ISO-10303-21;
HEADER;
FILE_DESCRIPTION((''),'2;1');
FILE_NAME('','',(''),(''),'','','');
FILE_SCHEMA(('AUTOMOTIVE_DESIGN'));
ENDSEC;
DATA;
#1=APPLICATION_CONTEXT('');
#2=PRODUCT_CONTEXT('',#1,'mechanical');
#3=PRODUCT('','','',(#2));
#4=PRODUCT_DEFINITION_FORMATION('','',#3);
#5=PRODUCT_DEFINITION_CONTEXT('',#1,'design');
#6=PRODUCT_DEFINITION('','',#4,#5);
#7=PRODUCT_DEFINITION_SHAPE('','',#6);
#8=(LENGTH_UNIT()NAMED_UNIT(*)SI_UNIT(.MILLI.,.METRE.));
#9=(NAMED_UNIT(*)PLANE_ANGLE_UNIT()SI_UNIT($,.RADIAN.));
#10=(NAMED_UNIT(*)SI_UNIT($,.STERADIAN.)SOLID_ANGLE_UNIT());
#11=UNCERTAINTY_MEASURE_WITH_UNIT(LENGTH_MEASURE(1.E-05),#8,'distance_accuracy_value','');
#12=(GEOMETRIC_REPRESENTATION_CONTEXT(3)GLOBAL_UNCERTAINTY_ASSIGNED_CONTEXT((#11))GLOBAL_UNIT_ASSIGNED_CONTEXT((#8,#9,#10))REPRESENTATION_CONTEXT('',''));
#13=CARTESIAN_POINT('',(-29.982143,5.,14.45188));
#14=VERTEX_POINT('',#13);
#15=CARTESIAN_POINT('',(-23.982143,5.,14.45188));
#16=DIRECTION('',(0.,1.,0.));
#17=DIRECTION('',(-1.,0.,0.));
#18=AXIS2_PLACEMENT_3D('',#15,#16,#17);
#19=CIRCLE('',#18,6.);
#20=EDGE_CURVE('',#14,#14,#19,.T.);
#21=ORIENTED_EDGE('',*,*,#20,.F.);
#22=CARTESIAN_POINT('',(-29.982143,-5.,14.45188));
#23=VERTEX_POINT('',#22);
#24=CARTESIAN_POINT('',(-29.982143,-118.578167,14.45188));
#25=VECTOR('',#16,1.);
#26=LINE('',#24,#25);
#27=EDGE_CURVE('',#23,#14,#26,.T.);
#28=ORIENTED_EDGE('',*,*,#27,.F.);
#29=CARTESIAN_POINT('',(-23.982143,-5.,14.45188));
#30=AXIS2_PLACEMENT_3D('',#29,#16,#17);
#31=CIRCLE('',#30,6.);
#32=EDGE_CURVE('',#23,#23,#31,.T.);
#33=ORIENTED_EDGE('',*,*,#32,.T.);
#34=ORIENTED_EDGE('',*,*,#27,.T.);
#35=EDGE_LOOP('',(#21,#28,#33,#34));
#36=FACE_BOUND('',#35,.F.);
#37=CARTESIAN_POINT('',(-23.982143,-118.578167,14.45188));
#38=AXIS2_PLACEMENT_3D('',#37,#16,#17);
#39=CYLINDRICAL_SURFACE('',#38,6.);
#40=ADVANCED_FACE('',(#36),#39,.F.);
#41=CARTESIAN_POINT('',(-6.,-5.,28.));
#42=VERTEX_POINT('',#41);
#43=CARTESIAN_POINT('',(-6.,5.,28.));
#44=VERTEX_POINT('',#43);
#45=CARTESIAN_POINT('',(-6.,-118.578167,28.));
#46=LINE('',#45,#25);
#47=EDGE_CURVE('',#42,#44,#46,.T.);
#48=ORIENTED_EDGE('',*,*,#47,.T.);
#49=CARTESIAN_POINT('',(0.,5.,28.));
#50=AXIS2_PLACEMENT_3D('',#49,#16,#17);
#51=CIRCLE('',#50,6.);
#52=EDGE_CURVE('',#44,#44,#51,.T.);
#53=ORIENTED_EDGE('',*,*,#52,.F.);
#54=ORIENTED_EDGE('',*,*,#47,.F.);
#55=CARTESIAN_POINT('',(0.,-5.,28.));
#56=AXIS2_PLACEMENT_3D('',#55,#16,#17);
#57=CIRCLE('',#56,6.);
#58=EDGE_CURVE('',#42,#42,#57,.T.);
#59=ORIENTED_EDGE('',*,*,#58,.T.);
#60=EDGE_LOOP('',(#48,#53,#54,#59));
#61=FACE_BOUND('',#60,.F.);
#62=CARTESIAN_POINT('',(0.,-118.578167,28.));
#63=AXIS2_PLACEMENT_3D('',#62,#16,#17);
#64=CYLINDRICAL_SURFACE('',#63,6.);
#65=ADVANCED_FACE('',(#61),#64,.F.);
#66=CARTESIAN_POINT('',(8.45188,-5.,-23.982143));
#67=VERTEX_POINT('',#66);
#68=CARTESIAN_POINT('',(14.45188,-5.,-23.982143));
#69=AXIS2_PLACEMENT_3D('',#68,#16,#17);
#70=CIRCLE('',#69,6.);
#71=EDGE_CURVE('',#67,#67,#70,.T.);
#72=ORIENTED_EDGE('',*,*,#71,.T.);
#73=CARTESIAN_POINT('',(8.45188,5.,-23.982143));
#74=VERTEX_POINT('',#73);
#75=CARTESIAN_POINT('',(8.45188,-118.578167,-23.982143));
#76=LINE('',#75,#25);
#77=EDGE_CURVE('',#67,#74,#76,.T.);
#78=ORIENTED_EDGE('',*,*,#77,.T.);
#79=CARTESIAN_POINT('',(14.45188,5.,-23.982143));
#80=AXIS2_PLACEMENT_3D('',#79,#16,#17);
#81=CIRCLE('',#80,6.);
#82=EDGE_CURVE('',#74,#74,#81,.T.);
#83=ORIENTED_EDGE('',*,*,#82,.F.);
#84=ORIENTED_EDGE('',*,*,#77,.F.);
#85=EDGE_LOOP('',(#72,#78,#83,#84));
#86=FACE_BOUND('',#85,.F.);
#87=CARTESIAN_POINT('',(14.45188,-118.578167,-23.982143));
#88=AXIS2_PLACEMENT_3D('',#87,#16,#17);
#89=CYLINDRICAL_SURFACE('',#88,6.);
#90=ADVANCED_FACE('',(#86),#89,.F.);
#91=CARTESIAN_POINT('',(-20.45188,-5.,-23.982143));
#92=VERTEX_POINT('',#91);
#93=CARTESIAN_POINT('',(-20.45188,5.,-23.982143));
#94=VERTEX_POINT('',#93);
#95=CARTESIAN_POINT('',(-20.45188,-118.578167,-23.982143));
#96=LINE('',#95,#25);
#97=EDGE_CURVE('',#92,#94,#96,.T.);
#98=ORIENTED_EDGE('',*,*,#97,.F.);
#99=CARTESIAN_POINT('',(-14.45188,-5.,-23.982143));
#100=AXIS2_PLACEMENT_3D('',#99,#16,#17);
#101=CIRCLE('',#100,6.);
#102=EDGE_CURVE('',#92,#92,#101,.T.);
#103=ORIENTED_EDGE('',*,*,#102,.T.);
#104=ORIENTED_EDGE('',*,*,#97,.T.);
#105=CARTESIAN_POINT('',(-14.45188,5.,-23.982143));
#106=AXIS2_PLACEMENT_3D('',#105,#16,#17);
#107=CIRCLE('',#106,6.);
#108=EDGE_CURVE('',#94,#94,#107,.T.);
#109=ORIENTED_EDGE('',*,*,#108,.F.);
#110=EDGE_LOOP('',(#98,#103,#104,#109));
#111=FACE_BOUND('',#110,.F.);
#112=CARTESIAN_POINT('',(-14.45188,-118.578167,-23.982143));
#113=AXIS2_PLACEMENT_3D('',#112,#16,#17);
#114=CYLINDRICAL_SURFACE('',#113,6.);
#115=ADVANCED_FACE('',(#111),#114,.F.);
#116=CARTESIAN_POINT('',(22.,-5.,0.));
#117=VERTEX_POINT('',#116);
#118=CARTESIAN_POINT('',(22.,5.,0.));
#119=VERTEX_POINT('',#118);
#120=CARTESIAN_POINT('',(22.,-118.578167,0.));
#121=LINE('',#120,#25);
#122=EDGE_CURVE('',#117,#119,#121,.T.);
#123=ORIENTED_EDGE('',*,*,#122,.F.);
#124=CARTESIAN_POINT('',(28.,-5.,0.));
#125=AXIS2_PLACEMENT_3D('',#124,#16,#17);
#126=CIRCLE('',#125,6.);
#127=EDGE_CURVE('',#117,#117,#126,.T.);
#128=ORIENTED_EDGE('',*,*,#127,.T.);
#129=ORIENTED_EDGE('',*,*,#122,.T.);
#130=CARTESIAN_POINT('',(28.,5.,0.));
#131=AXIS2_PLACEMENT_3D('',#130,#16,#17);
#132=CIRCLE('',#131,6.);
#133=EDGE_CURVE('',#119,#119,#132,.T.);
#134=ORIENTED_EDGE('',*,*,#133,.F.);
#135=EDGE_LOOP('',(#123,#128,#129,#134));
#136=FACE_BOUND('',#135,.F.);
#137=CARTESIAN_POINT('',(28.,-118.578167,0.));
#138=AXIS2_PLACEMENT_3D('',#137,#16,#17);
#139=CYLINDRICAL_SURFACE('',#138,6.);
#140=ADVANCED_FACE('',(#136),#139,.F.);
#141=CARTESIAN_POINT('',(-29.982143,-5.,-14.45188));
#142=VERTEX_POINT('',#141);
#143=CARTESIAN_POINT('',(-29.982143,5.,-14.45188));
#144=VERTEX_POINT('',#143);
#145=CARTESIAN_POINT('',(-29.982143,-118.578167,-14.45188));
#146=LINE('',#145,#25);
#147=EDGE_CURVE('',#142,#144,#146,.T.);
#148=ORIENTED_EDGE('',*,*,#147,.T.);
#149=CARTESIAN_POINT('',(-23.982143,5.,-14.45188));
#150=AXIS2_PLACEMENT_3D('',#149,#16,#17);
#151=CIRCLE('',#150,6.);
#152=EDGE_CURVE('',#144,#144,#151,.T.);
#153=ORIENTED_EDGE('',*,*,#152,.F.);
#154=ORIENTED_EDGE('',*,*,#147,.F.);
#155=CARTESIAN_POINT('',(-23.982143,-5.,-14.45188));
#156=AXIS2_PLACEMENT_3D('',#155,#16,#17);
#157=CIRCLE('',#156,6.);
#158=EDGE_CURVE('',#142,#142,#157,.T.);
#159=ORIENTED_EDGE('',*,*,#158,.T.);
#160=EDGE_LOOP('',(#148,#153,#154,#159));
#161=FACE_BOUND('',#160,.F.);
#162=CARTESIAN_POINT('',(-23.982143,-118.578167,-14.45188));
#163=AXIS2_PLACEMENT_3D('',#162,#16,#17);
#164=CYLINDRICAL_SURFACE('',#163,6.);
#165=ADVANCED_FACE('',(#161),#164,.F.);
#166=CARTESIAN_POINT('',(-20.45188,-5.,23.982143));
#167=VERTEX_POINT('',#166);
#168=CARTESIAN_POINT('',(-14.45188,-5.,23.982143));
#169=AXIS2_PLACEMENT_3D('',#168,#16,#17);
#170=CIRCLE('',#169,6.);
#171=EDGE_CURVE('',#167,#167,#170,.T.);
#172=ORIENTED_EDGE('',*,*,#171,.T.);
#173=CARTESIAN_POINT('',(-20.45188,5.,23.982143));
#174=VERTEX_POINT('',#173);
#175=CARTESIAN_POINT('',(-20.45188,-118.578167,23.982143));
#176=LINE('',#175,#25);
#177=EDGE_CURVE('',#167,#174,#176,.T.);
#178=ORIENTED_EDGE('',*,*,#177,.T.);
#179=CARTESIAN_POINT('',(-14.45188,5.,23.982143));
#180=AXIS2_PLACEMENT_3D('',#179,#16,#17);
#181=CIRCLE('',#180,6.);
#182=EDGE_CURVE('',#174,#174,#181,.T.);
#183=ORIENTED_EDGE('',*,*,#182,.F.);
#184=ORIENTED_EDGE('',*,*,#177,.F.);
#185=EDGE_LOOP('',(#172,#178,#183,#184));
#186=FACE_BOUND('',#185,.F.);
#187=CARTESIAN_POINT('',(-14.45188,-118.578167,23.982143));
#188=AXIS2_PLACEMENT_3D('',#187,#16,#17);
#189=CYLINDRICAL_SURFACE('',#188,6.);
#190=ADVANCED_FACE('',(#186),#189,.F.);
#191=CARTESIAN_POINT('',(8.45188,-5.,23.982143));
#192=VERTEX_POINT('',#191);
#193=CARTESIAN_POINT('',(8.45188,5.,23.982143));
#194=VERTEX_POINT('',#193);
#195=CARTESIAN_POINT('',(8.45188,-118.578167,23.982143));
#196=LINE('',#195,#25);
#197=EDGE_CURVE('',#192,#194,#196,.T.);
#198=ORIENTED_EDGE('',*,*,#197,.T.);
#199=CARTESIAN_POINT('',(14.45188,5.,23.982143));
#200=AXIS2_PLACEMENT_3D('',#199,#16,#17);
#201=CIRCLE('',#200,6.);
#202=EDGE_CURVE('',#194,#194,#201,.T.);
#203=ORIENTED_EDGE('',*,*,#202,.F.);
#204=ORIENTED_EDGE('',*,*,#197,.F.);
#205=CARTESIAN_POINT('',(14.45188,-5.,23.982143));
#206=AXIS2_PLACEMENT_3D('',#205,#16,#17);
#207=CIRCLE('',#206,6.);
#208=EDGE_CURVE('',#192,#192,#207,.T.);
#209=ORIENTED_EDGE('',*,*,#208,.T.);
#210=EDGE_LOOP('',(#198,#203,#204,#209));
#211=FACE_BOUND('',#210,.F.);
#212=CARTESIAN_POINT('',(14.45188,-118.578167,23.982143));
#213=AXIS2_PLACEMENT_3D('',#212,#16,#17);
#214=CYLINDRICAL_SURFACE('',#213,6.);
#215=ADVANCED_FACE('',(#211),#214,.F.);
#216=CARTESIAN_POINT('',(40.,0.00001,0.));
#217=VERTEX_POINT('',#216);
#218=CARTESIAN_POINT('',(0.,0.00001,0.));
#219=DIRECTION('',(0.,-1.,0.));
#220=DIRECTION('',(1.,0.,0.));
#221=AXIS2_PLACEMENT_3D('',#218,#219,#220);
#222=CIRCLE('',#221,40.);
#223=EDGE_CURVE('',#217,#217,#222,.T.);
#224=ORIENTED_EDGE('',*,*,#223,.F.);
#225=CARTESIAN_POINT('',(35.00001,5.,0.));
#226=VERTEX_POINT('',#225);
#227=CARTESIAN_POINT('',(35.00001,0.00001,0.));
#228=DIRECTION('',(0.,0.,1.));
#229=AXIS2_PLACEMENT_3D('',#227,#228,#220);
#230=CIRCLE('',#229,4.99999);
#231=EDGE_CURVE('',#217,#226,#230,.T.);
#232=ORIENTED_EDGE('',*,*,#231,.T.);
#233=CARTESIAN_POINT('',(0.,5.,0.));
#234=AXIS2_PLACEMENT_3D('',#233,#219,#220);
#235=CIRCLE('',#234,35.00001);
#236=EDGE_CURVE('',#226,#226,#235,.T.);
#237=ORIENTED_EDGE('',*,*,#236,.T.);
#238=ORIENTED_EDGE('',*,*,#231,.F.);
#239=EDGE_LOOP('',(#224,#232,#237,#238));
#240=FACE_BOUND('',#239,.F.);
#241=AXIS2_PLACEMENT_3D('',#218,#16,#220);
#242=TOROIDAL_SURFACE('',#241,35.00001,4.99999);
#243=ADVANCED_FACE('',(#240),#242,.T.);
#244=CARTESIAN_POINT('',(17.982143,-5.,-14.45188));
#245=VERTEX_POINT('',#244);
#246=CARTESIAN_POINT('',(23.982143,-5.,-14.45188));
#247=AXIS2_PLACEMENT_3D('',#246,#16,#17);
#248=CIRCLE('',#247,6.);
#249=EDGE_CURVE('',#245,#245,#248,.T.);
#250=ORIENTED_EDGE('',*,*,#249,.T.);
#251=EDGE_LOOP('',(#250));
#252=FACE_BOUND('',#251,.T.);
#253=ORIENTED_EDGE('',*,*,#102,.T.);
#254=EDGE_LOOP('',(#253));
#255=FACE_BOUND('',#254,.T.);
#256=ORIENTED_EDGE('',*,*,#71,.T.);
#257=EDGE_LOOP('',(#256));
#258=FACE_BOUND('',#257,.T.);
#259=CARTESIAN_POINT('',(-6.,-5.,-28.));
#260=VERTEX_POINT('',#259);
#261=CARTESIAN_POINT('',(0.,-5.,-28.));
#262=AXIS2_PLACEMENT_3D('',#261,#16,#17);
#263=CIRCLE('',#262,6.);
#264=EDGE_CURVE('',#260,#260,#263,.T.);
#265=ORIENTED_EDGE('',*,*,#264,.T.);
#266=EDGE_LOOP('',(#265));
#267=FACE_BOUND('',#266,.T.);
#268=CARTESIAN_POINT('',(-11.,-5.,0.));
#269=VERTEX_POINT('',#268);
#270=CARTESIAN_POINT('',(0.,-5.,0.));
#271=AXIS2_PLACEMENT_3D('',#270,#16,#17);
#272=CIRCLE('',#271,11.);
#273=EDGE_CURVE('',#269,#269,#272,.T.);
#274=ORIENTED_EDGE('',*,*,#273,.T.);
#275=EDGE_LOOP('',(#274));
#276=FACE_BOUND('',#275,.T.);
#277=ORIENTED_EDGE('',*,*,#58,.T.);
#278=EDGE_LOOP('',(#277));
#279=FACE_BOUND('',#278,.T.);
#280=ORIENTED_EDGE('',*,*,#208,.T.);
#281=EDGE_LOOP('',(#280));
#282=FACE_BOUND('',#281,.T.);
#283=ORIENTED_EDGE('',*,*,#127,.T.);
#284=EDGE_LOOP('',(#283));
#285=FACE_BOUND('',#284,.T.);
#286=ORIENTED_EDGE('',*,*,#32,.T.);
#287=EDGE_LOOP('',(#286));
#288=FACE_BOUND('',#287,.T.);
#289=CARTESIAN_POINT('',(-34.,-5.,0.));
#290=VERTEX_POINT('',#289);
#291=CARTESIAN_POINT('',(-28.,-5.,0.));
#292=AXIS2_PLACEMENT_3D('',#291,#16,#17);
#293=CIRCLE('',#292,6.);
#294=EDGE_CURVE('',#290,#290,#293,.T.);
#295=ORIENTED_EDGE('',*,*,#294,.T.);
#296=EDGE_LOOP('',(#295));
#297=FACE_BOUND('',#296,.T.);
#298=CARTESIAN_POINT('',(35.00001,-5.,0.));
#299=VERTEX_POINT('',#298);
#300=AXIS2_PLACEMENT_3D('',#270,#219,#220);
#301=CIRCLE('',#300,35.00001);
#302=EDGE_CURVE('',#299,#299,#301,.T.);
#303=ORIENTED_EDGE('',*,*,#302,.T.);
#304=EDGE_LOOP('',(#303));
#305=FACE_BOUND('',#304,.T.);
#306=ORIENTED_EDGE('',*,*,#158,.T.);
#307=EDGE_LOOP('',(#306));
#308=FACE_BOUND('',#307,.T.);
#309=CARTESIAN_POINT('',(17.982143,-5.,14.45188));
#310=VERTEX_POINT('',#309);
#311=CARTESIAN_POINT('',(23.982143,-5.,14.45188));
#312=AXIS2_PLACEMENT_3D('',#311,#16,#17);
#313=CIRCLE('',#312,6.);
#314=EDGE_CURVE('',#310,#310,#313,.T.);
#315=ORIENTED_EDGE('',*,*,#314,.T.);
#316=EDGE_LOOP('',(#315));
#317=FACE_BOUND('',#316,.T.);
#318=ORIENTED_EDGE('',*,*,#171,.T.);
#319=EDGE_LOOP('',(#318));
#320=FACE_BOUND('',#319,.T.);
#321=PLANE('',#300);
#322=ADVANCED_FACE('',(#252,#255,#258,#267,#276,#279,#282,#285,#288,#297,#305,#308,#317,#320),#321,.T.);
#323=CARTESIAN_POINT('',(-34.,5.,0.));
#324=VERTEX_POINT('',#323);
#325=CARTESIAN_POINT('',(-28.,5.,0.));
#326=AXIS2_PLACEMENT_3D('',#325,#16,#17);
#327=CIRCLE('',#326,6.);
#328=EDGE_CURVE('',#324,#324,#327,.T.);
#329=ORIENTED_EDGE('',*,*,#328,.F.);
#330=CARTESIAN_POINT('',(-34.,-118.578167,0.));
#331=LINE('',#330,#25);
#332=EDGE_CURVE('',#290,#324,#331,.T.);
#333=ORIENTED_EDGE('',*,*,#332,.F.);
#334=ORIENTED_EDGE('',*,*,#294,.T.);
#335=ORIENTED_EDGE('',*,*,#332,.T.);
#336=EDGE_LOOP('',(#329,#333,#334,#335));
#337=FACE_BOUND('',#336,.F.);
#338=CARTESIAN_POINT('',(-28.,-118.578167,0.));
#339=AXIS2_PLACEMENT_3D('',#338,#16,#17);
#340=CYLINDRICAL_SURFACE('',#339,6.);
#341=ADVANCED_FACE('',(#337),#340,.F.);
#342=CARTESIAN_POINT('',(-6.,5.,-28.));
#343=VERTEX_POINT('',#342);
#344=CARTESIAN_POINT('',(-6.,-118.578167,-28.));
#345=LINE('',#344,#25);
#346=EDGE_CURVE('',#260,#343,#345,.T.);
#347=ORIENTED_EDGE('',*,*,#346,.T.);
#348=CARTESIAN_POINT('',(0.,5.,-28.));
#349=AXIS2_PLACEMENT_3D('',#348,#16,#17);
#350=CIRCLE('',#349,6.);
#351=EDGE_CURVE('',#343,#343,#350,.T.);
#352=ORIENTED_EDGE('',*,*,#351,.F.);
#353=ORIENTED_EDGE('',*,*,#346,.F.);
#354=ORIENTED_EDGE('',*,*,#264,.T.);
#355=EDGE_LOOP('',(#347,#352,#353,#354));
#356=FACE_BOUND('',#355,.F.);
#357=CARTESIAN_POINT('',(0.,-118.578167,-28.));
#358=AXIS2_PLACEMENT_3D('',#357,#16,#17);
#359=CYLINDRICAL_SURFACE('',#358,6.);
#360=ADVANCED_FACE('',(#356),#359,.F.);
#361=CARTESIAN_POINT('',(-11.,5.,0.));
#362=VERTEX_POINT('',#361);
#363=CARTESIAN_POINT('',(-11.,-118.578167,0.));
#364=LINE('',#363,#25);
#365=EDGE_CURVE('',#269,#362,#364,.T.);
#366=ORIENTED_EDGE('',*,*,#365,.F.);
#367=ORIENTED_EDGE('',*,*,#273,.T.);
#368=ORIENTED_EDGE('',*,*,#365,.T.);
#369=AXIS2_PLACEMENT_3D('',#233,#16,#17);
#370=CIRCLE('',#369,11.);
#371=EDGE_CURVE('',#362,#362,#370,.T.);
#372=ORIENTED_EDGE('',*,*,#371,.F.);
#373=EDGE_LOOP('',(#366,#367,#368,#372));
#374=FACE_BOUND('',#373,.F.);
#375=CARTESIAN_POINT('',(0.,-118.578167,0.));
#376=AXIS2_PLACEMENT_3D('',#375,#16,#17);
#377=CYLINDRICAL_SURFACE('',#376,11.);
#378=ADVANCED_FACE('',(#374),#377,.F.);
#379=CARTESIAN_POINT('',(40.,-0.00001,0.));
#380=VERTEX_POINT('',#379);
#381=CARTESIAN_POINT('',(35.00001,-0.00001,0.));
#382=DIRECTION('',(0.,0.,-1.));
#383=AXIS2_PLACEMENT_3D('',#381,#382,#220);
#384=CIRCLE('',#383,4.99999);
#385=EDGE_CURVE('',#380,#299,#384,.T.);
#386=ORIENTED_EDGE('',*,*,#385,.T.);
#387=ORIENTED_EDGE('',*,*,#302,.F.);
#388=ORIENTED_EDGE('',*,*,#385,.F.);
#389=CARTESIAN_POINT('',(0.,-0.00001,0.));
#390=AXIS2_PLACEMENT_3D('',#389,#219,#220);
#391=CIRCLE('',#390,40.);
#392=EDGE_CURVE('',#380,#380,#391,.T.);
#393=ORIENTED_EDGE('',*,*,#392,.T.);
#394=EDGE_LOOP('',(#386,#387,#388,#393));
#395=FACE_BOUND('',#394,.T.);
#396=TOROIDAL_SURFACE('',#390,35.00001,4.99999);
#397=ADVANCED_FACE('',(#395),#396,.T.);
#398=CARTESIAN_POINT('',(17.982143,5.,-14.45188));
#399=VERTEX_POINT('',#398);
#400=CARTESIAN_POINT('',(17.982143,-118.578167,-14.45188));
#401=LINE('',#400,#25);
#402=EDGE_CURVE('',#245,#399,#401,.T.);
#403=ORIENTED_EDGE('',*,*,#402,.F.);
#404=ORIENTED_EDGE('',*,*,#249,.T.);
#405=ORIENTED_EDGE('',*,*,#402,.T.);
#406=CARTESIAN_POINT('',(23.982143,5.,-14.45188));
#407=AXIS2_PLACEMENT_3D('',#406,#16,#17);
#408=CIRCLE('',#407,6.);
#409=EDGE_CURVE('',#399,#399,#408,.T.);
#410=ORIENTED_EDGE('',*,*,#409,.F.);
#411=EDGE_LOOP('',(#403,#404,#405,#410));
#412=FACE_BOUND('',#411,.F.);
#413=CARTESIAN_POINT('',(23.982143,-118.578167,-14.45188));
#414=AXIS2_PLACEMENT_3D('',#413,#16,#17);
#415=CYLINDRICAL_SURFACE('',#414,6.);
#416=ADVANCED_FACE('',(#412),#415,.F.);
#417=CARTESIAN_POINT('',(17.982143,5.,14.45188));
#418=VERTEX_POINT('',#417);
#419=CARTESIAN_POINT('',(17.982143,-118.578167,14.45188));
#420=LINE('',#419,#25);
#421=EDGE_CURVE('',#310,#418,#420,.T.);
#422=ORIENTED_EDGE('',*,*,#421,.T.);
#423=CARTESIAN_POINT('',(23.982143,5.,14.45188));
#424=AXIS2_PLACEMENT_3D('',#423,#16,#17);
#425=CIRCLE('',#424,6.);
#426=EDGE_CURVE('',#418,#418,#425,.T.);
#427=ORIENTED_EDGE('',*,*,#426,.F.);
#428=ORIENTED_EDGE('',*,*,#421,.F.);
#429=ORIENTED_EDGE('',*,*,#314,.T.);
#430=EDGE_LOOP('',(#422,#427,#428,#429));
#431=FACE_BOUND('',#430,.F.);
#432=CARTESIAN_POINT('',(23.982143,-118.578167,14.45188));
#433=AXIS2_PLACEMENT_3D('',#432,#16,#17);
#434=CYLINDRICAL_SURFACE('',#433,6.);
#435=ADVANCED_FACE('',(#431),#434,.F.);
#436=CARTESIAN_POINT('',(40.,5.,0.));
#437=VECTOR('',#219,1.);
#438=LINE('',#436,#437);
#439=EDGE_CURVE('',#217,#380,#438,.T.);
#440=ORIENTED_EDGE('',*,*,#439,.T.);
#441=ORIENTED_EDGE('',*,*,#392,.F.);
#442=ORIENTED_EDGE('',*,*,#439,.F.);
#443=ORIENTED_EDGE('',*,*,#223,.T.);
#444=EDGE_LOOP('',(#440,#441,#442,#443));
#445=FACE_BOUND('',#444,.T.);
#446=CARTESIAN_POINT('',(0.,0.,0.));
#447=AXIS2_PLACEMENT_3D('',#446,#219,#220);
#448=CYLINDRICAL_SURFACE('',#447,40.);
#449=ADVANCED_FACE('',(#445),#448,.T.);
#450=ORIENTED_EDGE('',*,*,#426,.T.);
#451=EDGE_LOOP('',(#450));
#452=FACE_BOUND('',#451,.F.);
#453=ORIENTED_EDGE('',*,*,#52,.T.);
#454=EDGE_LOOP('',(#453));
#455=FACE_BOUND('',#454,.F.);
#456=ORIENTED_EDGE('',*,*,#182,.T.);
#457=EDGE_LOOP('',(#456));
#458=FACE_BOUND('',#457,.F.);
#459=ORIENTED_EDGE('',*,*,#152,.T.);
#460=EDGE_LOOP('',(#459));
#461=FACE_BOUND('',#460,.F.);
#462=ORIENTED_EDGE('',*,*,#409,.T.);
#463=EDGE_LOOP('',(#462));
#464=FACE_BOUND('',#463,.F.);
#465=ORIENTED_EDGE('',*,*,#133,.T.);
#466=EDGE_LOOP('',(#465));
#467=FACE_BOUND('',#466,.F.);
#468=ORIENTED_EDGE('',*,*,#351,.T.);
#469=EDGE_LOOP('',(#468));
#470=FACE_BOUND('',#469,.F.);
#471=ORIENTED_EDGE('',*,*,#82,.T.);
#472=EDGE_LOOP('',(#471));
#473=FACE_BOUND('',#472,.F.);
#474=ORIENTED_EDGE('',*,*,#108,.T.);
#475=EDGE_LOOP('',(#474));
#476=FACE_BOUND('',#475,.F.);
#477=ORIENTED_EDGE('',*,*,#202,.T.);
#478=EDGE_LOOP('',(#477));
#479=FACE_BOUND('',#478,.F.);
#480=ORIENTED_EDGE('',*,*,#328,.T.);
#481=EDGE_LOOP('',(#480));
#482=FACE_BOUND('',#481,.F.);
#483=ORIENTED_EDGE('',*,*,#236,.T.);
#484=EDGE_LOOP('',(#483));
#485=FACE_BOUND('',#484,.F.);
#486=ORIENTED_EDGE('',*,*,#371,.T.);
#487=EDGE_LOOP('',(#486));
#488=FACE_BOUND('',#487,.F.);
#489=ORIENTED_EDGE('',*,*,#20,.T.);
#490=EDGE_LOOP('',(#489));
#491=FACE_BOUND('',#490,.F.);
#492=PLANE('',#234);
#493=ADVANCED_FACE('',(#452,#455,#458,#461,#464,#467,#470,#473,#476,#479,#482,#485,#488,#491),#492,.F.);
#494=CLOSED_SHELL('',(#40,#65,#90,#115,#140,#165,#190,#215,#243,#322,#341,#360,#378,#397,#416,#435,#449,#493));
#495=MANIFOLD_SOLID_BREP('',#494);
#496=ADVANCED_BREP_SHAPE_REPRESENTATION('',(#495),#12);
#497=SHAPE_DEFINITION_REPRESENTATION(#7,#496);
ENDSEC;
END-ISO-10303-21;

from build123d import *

# Parameters (mm, degrees)
F0_R     = 40
F1_DEPTH = 5
F3_D     = 22
F4_D     = 12
F5_R     = 4.99999


# Not quite as in the source:
# - a fillet or chamfer is up to 0.001 mm smaller than in the source, because OpenCascade refuses the exact size
# - a feature names something its author has since deleted; it is built from what else it names


with BuildPart() as f1:
    # F0 (on Front) → F1 (new body, symmetric)
    with BuildSketch(Plane.XZ):
        Circle(F0_R)
    extrude(amount=F1_DEPTH, both=True)

    # F3 (through all)
    with Locations(Plane.XZ.offset(5)):
        with Locations((0, 0)):
            Hole(F3_D / 2)

    # F4 (through all)
    with Locations(Plane.XZ.offset(5)):
        with Locations((-28, 0), (0, 28), (28, 0), (0, -28), (-23.9821428571, 14.4518796002), (-14.4518796002, 23.9821428571), (14.4518796002, 23.9821428571), (23.9821428571, 14.4518796002), (23.9821428571, -14.4518796002), (-14.4518796002, -23.9821428571), (14.4518796002, -23.9821428571), (-23.9821428571, -14.4518796002)):
            Hole(F4_D / 2)

    # F5 (radius 5 in the source; OpenCascade refuses exactly that, so slightly less here)
    f5_edges = [f1.edges().sort_by_distance(p)[0] for p in [
        (-40, -5, 0),
        (-40, 5, 0),
        (40, 0, 0),
    ]]
    fillet(f5_edges, radius=F5_R)


solid = f1.part
